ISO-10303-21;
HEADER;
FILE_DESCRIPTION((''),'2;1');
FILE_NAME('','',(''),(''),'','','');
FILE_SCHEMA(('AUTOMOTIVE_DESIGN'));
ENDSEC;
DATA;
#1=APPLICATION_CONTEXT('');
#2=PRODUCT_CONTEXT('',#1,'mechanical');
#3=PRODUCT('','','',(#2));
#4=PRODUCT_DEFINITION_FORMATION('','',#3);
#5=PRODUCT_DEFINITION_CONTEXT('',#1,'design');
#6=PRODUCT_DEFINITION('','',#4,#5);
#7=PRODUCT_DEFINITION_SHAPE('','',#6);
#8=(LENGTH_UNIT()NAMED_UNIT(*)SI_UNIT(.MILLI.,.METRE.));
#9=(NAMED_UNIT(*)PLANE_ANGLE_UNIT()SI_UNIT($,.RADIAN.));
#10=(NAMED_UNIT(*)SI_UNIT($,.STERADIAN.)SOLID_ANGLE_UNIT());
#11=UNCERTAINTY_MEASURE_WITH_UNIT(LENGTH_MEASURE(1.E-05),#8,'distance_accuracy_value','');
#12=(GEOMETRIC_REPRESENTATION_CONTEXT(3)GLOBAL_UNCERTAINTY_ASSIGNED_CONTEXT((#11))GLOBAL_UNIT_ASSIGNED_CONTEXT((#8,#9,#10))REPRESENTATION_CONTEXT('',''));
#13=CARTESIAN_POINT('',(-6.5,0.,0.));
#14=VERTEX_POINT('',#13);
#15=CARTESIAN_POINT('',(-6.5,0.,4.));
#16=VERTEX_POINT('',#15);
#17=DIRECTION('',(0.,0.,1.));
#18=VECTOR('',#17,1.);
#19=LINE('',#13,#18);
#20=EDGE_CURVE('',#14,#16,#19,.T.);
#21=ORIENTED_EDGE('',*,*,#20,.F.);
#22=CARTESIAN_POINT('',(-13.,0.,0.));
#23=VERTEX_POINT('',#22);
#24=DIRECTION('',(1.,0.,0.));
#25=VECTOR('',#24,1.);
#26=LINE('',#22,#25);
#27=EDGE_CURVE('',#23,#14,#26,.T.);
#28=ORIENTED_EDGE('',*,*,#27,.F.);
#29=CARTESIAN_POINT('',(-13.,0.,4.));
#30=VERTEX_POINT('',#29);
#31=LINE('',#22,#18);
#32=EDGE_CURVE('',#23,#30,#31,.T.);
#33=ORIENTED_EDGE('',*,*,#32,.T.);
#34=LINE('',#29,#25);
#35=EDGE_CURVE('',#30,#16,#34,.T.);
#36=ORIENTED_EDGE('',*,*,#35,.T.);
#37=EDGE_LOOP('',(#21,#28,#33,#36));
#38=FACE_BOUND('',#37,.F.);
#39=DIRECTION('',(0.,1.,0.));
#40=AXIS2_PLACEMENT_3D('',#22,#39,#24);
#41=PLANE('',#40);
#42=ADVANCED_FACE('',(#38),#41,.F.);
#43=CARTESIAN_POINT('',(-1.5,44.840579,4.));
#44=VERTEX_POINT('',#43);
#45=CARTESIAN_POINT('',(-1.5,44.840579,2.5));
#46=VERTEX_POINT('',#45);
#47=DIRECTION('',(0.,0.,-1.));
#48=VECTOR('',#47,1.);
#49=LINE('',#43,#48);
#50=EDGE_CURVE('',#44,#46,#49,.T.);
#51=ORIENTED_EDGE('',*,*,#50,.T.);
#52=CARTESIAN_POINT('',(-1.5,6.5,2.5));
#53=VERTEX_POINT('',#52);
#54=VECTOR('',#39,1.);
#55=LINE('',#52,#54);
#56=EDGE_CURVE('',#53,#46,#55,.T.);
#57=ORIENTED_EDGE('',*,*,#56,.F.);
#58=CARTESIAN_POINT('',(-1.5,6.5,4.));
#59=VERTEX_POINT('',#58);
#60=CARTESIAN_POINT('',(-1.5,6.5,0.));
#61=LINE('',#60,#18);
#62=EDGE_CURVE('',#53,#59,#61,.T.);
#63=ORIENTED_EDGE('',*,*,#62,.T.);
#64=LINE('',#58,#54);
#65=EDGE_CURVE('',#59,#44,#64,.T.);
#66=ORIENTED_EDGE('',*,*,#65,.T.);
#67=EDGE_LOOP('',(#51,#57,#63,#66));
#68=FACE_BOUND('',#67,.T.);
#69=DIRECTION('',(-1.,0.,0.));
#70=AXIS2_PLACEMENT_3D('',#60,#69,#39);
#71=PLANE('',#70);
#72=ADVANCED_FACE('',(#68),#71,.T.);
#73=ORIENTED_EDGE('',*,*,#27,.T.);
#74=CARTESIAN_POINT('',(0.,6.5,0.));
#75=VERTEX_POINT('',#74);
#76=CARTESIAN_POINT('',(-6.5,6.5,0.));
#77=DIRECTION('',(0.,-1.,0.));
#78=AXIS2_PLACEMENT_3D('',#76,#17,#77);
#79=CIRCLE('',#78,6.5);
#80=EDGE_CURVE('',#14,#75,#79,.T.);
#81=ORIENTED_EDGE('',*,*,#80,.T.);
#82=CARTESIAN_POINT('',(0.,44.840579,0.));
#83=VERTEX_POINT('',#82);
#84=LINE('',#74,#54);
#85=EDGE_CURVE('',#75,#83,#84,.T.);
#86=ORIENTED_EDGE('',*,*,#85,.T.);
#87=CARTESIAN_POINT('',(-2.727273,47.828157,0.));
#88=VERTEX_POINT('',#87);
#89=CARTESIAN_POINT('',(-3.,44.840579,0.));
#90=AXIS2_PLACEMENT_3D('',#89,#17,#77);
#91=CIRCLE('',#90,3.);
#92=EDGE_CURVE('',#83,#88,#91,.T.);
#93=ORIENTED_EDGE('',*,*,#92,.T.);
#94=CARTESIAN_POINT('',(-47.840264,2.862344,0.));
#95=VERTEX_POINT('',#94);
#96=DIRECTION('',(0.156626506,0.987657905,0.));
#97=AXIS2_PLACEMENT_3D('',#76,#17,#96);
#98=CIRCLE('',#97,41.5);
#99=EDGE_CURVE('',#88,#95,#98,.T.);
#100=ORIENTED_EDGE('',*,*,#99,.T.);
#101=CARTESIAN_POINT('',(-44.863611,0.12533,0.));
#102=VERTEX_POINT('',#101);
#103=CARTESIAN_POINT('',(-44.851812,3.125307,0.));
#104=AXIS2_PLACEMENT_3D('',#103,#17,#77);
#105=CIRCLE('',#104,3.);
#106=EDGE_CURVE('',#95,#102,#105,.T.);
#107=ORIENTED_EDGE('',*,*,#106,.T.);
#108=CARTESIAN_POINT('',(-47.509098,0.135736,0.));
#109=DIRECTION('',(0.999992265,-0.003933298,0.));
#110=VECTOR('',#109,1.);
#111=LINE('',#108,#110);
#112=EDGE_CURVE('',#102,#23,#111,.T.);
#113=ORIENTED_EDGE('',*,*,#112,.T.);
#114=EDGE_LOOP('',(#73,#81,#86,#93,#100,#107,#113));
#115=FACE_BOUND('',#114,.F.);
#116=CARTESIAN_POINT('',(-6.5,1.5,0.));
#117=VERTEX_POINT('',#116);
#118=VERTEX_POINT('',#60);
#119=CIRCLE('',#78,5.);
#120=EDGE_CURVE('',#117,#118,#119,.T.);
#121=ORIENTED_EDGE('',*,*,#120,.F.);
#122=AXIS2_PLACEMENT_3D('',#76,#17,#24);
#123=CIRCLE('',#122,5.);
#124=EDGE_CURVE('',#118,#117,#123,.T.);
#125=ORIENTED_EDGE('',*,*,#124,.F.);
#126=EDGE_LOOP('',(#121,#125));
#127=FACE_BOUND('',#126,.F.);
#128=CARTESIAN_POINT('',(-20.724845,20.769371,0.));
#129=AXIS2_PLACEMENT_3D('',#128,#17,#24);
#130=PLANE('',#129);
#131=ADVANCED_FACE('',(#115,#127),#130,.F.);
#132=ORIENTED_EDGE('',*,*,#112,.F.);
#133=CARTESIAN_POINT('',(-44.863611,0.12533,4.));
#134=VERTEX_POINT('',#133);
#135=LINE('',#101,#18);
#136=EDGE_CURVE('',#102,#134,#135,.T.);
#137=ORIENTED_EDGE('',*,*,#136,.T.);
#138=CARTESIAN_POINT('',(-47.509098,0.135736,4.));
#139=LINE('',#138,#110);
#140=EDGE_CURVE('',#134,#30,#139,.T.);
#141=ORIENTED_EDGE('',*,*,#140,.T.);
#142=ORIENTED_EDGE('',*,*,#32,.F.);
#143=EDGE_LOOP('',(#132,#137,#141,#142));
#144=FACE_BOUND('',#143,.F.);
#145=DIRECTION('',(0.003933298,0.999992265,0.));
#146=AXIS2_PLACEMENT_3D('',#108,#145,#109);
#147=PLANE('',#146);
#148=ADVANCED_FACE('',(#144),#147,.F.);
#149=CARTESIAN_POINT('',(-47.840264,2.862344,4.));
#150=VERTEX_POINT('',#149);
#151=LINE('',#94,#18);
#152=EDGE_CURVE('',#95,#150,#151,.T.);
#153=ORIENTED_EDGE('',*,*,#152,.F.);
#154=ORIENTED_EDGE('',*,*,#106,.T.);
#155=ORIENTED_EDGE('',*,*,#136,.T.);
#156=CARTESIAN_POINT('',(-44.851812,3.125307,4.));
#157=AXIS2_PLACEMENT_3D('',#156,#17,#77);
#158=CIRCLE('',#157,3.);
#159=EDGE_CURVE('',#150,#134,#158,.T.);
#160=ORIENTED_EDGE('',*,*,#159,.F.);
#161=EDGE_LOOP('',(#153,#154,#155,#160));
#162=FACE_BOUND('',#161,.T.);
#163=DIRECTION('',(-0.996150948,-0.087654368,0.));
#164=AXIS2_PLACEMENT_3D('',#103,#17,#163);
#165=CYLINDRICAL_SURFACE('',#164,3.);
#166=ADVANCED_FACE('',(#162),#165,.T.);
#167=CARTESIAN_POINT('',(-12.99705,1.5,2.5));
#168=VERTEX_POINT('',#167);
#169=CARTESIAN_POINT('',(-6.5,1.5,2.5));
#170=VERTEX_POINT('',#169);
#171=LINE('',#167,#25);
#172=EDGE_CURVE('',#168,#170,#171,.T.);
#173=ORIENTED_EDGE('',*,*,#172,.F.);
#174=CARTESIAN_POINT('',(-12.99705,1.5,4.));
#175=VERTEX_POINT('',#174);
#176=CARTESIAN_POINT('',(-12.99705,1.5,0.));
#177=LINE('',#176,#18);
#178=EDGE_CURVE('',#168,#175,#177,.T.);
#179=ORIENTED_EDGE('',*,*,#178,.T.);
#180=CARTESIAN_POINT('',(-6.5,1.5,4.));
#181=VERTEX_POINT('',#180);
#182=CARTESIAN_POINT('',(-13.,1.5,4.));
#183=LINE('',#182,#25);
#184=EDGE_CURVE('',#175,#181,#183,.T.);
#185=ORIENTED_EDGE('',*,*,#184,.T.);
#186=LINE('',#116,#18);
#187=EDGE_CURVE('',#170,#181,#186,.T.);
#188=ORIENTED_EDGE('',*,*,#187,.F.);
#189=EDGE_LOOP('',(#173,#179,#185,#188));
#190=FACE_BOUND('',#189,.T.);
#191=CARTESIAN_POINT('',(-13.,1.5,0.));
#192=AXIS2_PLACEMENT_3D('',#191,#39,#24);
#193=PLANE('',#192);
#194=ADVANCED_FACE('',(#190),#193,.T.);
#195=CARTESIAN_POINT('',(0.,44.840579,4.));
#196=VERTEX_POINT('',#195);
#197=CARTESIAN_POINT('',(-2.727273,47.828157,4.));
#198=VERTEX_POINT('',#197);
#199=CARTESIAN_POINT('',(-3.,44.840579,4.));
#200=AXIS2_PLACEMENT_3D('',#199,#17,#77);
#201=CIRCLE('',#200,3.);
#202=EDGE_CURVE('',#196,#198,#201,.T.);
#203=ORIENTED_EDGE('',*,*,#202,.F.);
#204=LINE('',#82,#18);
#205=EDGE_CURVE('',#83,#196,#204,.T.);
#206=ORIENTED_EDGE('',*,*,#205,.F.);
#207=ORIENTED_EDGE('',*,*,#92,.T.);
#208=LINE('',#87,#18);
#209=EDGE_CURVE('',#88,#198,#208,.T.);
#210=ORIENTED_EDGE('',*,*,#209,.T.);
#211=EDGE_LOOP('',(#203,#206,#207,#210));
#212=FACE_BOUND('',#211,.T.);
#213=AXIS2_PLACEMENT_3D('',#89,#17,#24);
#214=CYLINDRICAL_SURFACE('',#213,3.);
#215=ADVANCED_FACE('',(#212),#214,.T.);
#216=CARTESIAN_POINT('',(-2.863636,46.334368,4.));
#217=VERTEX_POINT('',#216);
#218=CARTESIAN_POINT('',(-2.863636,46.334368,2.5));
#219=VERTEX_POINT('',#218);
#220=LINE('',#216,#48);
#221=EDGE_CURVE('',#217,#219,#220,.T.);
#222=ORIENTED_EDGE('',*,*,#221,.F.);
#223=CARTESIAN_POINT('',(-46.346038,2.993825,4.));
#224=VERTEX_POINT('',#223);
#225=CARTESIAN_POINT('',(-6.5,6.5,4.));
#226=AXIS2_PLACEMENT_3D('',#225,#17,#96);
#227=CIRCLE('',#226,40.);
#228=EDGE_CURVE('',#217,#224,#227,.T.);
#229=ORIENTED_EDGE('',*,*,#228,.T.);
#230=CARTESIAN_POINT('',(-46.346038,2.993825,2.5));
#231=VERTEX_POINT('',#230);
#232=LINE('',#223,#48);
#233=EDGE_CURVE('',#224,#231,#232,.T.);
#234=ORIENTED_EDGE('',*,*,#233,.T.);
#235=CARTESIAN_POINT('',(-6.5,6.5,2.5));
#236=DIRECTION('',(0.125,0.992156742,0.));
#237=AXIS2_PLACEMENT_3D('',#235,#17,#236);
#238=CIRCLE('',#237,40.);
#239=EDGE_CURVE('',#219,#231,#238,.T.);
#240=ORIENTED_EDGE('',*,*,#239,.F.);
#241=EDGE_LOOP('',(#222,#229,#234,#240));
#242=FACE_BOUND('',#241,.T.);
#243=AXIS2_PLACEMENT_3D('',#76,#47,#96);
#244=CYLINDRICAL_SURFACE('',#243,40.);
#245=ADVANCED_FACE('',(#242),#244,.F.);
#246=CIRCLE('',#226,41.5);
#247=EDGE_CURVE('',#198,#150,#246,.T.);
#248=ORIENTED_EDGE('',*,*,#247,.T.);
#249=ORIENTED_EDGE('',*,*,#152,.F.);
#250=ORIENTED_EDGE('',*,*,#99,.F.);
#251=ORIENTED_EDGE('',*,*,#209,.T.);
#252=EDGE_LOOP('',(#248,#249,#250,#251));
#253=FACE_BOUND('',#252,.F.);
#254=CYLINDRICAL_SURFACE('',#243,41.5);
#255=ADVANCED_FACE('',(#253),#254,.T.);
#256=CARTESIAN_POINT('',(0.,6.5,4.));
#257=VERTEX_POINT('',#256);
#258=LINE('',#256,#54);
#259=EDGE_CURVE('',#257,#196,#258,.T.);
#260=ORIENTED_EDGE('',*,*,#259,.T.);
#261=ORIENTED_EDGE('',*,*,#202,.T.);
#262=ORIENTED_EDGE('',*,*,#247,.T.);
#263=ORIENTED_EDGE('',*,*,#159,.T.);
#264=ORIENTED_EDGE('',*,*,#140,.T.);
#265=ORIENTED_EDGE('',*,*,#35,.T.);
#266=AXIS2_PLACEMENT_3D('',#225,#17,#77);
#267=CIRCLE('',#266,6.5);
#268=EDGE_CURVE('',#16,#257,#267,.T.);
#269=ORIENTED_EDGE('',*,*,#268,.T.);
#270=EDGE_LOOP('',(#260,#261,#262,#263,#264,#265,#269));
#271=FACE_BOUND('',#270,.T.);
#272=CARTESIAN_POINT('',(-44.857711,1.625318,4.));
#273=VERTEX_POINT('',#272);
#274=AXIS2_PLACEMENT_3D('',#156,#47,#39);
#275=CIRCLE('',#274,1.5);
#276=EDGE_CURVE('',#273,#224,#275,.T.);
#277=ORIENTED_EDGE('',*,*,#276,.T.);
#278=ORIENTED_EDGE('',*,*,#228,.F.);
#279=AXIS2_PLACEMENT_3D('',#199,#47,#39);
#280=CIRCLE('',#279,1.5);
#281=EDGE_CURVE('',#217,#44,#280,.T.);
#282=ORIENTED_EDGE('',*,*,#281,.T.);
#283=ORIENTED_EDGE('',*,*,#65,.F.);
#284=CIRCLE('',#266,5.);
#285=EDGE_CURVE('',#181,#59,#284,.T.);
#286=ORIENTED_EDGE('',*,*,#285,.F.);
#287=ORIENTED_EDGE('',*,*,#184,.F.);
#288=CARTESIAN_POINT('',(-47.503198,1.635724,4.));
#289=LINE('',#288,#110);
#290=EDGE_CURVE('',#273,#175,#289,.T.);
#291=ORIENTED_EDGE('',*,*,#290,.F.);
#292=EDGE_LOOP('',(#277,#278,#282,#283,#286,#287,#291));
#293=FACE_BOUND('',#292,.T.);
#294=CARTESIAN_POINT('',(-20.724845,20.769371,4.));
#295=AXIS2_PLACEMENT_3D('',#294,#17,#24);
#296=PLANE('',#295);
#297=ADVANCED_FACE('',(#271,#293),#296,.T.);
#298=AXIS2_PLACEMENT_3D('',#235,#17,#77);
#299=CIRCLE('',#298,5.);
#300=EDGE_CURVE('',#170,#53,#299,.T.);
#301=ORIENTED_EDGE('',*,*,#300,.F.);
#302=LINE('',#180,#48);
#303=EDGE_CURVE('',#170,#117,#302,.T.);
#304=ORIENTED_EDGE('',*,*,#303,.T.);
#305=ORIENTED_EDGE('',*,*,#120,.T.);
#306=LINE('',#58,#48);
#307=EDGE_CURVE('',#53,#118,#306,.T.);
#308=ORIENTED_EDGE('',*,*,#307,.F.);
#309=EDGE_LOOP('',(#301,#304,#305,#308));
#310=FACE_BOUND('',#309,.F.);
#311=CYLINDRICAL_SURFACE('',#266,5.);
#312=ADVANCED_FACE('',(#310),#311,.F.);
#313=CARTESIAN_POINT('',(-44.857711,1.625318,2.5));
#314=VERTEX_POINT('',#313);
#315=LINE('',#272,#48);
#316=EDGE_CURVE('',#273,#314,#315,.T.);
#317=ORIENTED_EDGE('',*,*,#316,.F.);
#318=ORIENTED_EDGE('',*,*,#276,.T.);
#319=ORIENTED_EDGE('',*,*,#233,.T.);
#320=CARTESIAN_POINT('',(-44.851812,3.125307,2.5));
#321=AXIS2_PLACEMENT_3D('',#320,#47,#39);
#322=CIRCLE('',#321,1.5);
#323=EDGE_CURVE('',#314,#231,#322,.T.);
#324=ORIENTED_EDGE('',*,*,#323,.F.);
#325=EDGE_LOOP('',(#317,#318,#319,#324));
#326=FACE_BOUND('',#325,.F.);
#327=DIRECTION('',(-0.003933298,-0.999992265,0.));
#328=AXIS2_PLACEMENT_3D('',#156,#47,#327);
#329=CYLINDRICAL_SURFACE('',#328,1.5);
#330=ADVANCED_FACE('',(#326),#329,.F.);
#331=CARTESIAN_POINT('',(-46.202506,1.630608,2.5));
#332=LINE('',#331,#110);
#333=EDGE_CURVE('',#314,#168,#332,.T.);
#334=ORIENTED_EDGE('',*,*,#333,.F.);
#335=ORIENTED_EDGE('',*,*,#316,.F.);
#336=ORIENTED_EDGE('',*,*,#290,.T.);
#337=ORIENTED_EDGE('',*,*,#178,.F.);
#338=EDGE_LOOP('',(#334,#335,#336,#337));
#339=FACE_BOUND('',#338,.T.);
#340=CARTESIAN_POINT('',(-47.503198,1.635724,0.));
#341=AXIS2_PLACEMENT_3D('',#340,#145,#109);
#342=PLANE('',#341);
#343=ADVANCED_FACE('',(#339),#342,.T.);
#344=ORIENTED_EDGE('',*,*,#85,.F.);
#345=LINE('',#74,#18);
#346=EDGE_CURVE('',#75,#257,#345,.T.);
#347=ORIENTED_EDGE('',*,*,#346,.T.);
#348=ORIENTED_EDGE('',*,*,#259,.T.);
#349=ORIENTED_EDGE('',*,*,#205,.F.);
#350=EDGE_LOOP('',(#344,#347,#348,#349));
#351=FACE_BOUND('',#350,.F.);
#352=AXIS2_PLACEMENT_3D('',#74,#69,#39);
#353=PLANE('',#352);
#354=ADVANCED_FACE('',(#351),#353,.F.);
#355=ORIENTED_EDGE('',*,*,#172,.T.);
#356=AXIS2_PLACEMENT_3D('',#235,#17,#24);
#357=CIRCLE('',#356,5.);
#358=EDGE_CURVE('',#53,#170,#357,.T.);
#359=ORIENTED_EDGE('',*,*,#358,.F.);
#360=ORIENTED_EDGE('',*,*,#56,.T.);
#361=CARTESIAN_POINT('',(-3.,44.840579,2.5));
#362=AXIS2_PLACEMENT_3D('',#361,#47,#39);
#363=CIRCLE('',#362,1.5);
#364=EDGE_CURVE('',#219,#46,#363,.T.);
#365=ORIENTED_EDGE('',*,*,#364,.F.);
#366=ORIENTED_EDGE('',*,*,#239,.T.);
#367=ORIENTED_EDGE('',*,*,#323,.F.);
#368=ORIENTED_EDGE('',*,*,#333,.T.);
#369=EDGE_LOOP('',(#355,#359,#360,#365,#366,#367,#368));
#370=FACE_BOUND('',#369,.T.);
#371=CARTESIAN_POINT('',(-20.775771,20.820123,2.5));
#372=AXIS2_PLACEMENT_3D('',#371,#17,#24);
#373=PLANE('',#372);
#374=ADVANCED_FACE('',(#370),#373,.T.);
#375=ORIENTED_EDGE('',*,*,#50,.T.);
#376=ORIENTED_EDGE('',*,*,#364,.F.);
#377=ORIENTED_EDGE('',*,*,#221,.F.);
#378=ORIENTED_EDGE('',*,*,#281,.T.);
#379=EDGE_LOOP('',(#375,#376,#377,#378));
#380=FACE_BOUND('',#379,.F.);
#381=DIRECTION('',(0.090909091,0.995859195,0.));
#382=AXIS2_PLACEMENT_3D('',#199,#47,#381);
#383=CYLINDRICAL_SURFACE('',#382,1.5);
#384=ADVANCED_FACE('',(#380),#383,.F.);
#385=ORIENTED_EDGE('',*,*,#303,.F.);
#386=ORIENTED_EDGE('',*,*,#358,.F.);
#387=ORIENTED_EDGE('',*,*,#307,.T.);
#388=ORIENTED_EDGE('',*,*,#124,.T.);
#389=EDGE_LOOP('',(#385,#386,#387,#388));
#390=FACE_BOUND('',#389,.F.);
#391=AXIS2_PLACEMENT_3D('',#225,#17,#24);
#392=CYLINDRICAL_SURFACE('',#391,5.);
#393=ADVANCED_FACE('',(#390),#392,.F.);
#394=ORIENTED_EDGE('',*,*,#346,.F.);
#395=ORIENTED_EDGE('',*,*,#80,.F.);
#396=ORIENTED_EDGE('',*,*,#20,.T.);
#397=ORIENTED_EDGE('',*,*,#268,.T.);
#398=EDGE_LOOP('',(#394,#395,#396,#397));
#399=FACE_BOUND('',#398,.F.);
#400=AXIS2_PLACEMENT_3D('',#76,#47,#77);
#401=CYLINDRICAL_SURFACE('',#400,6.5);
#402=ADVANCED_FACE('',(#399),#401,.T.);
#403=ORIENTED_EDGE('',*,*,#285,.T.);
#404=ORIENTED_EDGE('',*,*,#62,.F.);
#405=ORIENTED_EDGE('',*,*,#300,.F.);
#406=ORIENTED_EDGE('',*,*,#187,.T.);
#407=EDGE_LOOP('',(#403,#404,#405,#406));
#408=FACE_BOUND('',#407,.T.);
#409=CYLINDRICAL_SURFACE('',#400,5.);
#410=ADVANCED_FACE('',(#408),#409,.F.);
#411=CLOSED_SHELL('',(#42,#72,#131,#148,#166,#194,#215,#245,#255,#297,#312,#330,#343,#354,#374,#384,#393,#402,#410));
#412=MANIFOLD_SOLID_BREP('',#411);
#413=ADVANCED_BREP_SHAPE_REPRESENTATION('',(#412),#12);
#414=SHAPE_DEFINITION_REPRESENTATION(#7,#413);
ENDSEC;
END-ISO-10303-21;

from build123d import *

# Parameters (mm, degrees)
F1_DEPTH = 4
F2_T     = -1.5
F5_DEPTH = 2.5
F7_DEPTH = 4.001
F8_R     = 3
F9_R     = 1.5


# Not quite as in the source:
# - a feature names something its author has since deleted; it is built from what else it names


with BuildPart() as f1:
    # F0 (on Top) → F1 (new body)
    with BuildSketch(Plane.XY):
        with BuildLine():
            ThreePointArc((-6.5, 0), (-1.9038059223, 1.9038059223), (0, 6.5))
            Line((0, 6.5), (0, 47.4878030638))
            ThreePointArc((0, 47.4878030638), (-35.79631442, 35.8934680057), (-47.5090982427, 0.1357356025))
            Line((-47.5090982427, 0.1357356025), (-13, 0))
            Line((-13, 0), (-6.5, 0))
        make_face()
    extrude(amount=F1_DEPTH)

    # F2
    f2_openings = [f1.faces().sort_by_distance(p)[0] for p in [
        (-21.256566, 21.300379, 4),
        (-21.256566, 21.300379, 0),
    ]]
    offset(amount=F2_T, openings=f2_openings)

    # F4 (on offset) → F5 (join)
    with BuildSketch(Plane.XY.offset(2.5)):
        with BuildLine():
            Line((-46.2025064836, 1.6306079518), (-12.9970500154, 1.5))
            Line((-12.9970500154, 1.5), (-6.5, 1.5))
            ThreePointArc((-6.5, 1.5), (-2.9644660941, 2.9644660941), (-1.5, 6.5))
            Line((-1.5, 6.5), (-1.5, 46.186269666))
            ThreePointArc((-1.5, 46.186269666), (-34.737700628, 34.8307653134), (-46.2025064836, 1.6306079518))
        make_face()
    extrude(amount=-F5_DEPTH)

    # F6 (on face) → F7 (cut, through all)
    with BuildSketch(Plane.XY.offset(4)):
        with BuildLine():
            ThreePointArc((-1.5, 6.5), (-10.0355339059, 10.0355339059), (-6.5, 1.5))
            ThreePointArc((-6.5, 1.5), (-2.9644660941, 2.9644660941), (-1.5, 6.5))
        make_face()
    extrude(amount=-F7_DEPTH, mode=Mode.SUBTRACT)

    # F8
    f8_edges = [f1.edges().sort_by_distance(p)[0] for p in [
        (-47.509098, 0.135736, 2),
        (0, 47.487803, 2),
    ]]
    fillet(f8_edges, radius=F8_R)

    # F9
    f9_edges = [f1.edges().sort_by_distance(p)[0] for p in [
        (-46.202506, 1.630608, 3.25),
        (-1.5, 46.18627, 3.25),
    ]]
    fillet(f9_edges, radius=F9_R)


solid = f1.part
